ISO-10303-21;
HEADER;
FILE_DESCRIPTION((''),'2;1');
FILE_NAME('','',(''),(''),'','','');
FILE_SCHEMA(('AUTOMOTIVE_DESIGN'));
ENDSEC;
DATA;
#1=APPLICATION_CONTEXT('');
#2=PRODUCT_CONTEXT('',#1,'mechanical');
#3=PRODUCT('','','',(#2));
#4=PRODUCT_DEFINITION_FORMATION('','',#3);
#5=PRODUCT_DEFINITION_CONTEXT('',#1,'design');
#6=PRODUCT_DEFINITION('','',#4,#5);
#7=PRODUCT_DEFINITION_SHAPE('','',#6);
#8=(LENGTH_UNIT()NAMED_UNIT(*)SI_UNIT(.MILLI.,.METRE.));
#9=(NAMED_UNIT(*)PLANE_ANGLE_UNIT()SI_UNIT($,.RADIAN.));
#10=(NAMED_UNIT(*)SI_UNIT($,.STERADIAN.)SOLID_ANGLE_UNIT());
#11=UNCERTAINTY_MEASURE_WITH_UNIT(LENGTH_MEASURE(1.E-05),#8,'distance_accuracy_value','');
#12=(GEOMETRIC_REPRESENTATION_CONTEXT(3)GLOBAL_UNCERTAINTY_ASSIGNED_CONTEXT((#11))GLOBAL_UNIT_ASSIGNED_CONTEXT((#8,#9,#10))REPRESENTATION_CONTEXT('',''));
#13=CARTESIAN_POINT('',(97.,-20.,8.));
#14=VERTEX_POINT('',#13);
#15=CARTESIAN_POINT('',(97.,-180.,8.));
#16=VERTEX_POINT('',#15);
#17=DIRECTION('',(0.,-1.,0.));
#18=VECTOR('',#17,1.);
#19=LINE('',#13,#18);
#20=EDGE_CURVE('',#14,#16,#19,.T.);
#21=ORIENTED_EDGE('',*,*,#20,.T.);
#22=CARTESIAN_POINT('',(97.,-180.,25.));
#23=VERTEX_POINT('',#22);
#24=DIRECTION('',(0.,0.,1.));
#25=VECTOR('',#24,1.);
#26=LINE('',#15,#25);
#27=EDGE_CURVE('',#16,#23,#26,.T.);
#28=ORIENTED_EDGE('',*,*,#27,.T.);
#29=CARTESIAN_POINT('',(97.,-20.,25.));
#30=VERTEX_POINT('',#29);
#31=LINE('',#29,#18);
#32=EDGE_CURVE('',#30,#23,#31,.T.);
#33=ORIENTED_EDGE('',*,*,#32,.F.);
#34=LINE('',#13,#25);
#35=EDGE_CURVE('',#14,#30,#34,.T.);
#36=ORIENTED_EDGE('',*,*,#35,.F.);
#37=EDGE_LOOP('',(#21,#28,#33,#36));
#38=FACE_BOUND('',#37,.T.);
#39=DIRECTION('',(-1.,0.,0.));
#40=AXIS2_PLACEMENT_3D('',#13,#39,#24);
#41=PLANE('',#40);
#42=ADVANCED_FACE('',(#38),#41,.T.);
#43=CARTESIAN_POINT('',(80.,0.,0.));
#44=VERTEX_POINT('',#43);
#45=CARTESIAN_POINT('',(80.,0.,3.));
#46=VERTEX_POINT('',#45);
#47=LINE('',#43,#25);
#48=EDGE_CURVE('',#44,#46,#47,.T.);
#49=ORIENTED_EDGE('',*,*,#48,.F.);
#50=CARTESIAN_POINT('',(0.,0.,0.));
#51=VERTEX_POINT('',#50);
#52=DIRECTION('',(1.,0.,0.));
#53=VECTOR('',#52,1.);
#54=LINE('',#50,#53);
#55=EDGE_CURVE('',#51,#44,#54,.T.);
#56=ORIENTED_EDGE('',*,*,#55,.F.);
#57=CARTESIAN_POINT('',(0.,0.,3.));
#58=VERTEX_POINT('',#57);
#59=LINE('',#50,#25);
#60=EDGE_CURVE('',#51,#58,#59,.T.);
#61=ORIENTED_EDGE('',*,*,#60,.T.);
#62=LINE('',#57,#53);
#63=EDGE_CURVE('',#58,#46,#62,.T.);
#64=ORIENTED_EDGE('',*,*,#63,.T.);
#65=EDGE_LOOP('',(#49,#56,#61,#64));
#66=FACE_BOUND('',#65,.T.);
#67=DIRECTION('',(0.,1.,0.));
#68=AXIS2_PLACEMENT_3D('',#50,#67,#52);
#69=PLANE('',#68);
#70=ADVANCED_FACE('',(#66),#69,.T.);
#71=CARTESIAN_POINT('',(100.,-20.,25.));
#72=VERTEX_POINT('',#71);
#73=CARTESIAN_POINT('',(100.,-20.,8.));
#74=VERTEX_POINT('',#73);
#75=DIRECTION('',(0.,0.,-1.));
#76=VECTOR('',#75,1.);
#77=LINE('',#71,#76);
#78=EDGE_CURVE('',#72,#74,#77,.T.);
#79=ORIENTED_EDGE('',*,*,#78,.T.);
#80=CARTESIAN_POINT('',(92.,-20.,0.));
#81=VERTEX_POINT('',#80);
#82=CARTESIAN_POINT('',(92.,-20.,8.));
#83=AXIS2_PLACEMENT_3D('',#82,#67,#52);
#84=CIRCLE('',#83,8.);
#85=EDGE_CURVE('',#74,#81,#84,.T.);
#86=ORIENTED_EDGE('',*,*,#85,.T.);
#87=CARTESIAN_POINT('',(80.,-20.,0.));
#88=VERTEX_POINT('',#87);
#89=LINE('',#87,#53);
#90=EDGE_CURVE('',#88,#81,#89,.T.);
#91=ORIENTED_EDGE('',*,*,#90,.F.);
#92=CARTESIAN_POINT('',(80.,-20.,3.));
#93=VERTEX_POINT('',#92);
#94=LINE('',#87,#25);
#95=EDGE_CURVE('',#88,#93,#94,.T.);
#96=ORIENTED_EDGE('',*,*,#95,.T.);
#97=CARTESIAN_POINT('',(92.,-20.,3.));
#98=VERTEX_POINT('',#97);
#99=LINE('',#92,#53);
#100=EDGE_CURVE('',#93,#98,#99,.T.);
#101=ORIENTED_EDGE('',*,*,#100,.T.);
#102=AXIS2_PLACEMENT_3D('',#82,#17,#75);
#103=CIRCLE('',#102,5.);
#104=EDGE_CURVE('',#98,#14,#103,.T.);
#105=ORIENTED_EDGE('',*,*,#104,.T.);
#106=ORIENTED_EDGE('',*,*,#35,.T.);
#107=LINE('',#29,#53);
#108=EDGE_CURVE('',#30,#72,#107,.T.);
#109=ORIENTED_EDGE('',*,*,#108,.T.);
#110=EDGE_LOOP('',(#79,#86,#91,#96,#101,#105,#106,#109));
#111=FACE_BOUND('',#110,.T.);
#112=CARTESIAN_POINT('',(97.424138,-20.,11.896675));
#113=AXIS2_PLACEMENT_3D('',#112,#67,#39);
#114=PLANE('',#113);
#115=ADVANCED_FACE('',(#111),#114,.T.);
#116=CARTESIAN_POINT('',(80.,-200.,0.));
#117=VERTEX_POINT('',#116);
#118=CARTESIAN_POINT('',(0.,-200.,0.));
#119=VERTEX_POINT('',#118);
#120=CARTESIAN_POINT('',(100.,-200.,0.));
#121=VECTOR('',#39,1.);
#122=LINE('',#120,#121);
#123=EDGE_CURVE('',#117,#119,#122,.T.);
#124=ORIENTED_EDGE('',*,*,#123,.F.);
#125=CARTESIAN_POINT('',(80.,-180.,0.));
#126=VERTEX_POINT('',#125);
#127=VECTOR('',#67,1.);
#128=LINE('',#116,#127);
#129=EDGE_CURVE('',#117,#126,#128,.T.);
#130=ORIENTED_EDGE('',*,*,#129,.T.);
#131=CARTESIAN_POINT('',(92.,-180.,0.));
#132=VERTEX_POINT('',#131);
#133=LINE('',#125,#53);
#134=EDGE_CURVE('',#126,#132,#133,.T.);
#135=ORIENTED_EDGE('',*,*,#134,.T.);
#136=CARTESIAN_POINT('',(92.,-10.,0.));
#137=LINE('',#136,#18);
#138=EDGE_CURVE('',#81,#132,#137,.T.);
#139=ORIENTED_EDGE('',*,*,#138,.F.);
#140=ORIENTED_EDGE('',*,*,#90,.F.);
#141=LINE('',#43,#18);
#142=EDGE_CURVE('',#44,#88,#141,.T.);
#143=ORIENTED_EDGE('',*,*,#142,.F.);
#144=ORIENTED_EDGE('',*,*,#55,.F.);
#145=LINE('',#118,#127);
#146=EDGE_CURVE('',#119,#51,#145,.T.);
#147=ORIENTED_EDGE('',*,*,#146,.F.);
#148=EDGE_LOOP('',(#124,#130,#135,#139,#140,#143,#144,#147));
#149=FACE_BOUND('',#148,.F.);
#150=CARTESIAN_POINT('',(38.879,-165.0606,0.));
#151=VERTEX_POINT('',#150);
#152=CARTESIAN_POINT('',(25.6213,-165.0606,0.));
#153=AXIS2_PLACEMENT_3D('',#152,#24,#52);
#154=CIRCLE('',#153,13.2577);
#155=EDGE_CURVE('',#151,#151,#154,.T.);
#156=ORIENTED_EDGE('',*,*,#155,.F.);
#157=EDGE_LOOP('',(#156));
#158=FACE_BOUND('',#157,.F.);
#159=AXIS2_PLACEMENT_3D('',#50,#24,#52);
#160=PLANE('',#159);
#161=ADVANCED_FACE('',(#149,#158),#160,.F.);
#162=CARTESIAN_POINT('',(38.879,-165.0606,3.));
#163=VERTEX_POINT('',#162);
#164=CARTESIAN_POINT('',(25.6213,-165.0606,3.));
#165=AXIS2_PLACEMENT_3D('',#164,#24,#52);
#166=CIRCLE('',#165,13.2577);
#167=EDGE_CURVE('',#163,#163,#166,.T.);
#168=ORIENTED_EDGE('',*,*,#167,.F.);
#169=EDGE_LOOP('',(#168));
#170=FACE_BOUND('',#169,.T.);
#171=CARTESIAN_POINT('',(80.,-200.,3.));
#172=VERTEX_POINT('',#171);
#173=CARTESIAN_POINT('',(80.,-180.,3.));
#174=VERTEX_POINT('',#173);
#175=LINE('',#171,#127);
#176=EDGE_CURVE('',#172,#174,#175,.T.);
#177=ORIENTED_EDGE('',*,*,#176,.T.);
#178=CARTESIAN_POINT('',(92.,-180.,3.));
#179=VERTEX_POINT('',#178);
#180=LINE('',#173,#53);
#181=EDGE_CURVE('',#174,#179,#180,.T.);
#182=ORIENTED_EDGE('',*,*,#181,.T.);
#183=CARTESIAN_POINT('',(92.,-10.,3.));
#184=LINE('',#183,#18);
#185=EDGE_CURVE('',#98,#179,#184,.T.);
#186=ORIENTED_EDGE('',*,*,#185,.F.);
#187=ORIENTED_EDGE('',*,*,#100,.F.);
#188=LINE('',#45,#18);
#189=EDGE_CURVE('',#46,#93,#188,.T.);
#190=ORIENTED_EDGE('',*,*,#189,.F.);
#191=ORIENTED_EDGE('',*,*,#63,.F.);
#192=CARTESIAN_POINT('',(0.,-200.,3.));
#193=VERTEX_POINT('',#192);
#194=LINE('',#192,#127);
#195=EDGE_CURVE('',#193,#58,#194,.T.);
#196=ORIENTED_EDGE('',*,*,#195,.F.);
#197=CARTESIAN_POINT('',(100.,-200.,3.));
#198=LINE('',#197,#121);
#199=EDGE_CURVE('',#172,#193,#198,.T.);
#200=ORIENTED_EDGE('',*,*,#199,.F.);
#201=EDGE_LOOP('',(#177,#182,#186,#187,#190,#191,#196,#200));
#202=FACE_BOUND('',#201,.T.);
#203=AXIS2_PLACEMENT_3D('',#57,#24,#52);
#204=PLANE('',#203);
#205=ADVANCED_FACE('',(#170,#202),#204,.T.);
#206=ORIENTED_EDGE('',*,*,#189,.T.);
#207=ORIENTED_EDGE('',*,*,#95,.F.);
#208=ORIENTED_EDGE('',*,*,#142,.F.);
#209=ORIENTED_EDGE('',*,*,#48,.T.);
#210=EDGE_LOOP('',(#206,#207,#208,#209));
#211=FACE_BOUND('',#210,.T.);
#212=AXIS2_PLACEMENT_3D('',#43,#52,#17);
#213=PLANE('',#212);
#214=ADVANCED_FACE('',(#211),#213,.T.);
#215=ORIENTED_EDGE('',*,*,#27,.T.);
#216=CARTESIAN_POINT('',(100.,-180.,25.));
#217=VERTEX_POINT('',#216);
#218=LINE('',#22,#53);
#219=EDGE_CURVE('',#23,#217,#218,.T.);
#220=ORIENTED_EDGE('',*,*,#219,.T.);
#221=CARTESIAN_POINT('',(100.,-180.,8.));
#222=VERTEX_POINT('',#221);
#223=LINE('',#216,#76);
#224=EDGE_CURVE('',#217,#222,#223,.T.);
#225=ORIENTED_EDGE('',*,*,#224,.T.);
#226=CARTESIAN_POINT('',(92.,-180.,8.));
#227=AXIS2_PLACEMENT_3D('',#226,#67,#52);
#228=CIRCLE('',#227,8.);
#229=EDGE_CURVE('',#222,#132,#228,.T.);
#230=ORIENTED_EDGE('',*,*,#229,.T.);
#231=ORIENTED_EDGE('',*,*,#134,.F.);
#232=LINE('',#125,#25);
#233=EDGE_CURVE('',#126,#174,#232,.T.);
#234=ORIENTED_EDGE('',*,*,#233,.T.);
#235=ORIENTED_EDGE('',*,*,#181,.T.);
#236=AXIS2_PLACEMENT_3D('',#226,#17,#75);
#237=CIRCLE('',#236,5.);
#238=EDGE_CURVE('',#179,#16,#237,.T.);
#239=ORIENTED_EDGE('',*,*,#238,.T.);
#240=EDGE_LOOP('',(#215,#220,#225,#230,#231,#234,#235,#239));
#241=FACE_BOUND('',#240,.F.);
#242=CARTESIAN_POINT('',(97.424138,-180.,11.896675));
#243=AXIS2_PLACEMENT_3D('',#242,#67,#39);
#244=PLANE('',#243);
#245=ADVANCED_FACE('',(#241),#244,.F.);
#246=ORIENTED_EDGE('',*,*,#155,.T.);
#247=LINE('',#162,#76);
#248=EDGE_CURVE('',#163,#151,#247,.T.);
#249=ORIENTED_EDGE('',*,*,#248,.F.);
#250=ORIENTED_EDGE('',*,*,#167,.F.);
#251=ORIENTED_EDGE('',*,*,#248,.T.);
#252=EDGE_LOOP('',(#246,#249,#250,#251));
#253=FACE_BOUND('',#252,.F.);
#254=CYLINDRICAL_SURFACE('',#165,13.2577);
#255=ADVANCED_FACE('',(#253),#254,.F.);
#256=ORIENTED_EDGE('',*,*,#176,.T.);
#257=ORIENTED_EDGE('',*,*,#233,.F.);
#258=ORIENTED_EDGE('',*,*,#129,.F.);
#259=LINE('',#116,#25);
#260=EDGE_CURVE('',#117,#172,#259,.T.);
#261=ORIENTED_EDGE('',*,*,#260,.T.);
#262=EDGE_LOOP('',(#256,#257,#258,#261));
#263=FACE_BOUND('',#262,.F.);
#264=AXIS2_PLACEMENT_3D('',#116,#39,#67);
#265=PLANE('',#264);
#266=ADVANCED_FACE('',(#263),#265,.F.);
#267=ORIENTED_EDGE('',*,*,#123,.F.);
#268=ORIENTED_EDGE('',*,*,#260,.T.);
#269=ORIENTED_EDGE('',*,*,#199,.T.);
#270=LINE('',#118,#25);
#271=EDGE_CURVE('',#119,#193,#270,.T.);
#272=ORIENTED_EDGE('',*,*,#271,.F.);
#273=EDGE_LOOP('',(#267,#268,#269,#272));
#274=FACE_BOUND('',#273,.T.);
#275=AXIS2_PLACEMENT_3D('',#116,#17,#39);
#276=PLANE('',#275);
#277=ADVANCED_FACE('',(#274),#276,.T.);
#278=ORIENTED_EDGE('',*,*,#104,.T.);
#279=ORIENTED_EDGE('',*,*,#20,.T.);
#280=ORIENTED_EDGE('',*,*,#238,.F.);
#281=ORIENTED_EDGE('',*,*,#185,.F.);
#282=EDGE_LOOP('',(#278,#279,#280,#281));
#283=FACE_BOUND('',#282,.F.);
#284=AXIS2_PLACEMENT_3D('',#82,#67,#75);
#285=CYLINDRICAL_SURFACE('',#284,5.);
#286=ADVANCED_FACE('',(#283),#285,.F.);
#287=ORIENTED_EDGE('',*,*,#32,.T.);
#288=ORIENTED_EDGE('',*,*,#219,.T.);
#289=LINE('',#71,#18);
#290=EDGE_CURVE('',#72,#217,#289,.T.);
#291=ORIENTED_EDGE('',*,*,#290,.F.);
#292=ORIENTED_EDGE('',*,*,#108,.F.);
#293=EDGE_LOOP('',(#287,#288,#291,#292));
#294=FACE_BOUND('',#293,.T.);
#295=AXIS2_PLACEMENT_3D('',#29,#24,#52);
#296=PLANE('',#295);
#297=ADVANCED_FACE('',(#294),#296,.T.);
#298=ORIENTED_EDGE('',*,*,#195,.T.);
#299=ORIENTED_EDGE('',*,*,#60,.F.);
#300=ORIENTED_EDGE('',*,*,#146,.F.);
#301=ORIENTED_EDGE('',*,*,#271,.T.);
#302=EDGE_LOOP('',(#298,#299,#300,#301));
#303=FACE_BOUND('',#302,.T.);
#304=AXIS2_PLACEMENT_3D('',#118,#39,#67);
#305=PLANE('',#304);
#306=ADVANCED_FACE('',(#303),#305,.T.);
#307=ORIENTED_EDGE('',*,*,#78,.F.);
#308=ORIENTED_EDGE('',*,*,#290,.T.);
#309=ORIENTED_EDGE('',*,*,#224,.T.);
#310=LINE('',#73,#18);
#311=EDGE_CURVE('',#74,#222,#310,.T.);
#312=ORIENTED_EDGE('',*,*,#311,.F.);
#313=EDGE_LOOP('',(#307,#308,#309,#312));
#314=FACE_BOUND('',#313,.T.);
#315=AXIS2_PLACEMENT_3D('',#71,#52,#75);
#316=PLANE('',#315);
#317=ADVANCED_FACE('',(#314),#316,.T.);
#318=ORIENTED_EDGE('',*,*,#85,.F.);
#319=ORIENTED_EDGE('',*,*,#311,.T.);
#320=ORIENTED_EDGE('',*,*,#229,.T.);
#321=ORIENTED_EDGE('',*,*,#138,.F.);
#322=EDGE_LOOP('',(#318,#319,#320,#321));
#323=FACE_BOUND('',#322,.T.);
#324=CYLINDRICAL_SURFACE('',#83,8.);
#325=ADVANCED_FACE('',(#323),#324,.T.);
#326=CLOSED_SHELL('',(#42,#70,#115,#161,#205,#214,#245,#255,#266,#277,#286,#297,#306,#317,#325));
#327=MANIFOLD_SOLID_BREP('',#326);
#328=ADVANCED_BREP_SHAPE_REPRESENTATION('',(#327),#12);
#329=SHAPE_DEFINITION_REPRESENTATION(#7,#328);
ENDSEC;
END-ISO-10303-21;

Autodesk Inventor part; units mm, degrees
ref_plane "YZ Plane" through (0, 0, 0) normal (1, 0, 0) x (0, 1, 0)
ref_plane "XZ Plane" through (0, 0, 0) normal (0, 1, 0) x (-1, 0, 0)
ref_plane "XY Plane" through (0, 0, 0) normal (0, 0, 1) x (1, 0, 0)
sketch "Sketch7" plane through (0, 0, 0) normal (0, 0, 1) x (1, 0, 0)
  line L0 (0, 0) -> (100, 0)
  line L1 (100, 0) -> (100, -200)
  line L2 (100, -200) -> (0, -200)
  line L3 (0, -200) -> (0, 0)
  line L4 (100, 0) -> (80, 0)
  line L5 (80, 0) -> (80, -20)
  line L6 (80, -20) -> (100, -20)
  line L7 (100, -20) -> (100, 0)
  line L8 (100, -200) -> (80, -200)
  line L9 (80, -200) -> (80, -180)
  line L10 (80, -180) -> (100, -180)
  line L11 (100, -180) -> (100, -200)
  dimension "d23" = 100
  dimension "d24" = 200
  dimension "d25" = 20
  dimension "d26" = 20
extrude "Plate3" add sketch "Sketch7" along normal blind 3 contours L0 L5 L6 L1 L10 L9 L2 L3
sketch "Sketch8" plane through (0, 0, 3) normal (0, 0, 1) x (1, 0, 0)
  line L0 (6.2166, -35.2952) -> (70.6562, -35.2952) construction
  line L1 (70.6562, -35.2952) -> (70.6562, -48.8117) construction
  line L2 (70.6562, -48.8117) -> (6.2166, -48.8117) construction
  line L3 (6.2166, -48.8117) -> (6.2166, -35.2952) construction
  point P0 (0, 0)
mark "Mark2"
sketch "Sketch9" plane through (0, -200, 3) normal (0, 0, 1) x (1, 0, 0)
  circle A0 centre (25.6213, 34.9394) radius 13.2577
  point P0 (0, 200)
extrude "Cut1" cut sketch "Sketch9" against normal blind 3
sketch "Sketch10" plane through (0, 0, 0) normal (0, 0, -1) x (-1, 0, 0)
  line L0 (-87.8036, -108.5191) -> (-55.956, -108.5191) construction
  line L1 (-55.956, -108.5191) -> (-55.956, -118.5191) construction
  line L2 (-55.956, -118.5191) -> (-87.8036, -118.5191) construction
  line L3 (-87.8036, -118.5191) -> (-87.8036, -108.5191) construction
  point P0 (0, 0)
mark "Mark3"
sketch "Sketch11" plane through (97, -20, 0) normal (1, 0, 0) x (0, 1, 0)
  line L0 (-160, 0) -> (0, 0)
  line L1 (0, 0) -> (0, 25)
  line L2 (0, 25) -> (-160, 25)
  line L3 (-160, 25) -> (-160, 0)
edge flange "Flange2" height 25 angle 90 thickness 3 bend radius 5 thickness toward (1, 0, 0) relief round relief width 3 relief depth 1.5 edges at (100, -100, 3) wall of the first edge with corners at (97, -180, 0) (97, -20, 0) (97, -20, 25) (97, -180, 25)
bend "Bend2"
corner "Corner2"
equation "\"d28\" = Thickness"
equation "\"d27\" = Thickness"
equation "\"d30\" = BendReliefWidth"
equation "\"d31\" = BendReliefDepth"
equation "\"d32\" = MinimumRemnant"
equation "\"d33\" = TransitionRadius"
equation "\"d36\" = BendRadius"
equation "\"d37\" = CornerReliefSize"
equation "\"d38\" = GapSize"
equation "\"d39\" = JacobiRadiusSize"
equation "\"BendReliefWidth\" = Thickness"
equation "\"BendReliefDepth\" = 0.5 * Thickness"
equation "\"CornerReliefSize\" = 4 * Thickness"
equation "\"MinimumRemnant\" = 2 * Thickness"
equation "\"TransitionRadius\" = BendRadius"
equation "\"JacobiRadiusSize\" = BendRadius"
equation "\"GapSize\" = Thickness"
equation "\"Thickness\" = 3"
equation "\"BendRadius\" = 5"
properties material "Stainless Steel"
